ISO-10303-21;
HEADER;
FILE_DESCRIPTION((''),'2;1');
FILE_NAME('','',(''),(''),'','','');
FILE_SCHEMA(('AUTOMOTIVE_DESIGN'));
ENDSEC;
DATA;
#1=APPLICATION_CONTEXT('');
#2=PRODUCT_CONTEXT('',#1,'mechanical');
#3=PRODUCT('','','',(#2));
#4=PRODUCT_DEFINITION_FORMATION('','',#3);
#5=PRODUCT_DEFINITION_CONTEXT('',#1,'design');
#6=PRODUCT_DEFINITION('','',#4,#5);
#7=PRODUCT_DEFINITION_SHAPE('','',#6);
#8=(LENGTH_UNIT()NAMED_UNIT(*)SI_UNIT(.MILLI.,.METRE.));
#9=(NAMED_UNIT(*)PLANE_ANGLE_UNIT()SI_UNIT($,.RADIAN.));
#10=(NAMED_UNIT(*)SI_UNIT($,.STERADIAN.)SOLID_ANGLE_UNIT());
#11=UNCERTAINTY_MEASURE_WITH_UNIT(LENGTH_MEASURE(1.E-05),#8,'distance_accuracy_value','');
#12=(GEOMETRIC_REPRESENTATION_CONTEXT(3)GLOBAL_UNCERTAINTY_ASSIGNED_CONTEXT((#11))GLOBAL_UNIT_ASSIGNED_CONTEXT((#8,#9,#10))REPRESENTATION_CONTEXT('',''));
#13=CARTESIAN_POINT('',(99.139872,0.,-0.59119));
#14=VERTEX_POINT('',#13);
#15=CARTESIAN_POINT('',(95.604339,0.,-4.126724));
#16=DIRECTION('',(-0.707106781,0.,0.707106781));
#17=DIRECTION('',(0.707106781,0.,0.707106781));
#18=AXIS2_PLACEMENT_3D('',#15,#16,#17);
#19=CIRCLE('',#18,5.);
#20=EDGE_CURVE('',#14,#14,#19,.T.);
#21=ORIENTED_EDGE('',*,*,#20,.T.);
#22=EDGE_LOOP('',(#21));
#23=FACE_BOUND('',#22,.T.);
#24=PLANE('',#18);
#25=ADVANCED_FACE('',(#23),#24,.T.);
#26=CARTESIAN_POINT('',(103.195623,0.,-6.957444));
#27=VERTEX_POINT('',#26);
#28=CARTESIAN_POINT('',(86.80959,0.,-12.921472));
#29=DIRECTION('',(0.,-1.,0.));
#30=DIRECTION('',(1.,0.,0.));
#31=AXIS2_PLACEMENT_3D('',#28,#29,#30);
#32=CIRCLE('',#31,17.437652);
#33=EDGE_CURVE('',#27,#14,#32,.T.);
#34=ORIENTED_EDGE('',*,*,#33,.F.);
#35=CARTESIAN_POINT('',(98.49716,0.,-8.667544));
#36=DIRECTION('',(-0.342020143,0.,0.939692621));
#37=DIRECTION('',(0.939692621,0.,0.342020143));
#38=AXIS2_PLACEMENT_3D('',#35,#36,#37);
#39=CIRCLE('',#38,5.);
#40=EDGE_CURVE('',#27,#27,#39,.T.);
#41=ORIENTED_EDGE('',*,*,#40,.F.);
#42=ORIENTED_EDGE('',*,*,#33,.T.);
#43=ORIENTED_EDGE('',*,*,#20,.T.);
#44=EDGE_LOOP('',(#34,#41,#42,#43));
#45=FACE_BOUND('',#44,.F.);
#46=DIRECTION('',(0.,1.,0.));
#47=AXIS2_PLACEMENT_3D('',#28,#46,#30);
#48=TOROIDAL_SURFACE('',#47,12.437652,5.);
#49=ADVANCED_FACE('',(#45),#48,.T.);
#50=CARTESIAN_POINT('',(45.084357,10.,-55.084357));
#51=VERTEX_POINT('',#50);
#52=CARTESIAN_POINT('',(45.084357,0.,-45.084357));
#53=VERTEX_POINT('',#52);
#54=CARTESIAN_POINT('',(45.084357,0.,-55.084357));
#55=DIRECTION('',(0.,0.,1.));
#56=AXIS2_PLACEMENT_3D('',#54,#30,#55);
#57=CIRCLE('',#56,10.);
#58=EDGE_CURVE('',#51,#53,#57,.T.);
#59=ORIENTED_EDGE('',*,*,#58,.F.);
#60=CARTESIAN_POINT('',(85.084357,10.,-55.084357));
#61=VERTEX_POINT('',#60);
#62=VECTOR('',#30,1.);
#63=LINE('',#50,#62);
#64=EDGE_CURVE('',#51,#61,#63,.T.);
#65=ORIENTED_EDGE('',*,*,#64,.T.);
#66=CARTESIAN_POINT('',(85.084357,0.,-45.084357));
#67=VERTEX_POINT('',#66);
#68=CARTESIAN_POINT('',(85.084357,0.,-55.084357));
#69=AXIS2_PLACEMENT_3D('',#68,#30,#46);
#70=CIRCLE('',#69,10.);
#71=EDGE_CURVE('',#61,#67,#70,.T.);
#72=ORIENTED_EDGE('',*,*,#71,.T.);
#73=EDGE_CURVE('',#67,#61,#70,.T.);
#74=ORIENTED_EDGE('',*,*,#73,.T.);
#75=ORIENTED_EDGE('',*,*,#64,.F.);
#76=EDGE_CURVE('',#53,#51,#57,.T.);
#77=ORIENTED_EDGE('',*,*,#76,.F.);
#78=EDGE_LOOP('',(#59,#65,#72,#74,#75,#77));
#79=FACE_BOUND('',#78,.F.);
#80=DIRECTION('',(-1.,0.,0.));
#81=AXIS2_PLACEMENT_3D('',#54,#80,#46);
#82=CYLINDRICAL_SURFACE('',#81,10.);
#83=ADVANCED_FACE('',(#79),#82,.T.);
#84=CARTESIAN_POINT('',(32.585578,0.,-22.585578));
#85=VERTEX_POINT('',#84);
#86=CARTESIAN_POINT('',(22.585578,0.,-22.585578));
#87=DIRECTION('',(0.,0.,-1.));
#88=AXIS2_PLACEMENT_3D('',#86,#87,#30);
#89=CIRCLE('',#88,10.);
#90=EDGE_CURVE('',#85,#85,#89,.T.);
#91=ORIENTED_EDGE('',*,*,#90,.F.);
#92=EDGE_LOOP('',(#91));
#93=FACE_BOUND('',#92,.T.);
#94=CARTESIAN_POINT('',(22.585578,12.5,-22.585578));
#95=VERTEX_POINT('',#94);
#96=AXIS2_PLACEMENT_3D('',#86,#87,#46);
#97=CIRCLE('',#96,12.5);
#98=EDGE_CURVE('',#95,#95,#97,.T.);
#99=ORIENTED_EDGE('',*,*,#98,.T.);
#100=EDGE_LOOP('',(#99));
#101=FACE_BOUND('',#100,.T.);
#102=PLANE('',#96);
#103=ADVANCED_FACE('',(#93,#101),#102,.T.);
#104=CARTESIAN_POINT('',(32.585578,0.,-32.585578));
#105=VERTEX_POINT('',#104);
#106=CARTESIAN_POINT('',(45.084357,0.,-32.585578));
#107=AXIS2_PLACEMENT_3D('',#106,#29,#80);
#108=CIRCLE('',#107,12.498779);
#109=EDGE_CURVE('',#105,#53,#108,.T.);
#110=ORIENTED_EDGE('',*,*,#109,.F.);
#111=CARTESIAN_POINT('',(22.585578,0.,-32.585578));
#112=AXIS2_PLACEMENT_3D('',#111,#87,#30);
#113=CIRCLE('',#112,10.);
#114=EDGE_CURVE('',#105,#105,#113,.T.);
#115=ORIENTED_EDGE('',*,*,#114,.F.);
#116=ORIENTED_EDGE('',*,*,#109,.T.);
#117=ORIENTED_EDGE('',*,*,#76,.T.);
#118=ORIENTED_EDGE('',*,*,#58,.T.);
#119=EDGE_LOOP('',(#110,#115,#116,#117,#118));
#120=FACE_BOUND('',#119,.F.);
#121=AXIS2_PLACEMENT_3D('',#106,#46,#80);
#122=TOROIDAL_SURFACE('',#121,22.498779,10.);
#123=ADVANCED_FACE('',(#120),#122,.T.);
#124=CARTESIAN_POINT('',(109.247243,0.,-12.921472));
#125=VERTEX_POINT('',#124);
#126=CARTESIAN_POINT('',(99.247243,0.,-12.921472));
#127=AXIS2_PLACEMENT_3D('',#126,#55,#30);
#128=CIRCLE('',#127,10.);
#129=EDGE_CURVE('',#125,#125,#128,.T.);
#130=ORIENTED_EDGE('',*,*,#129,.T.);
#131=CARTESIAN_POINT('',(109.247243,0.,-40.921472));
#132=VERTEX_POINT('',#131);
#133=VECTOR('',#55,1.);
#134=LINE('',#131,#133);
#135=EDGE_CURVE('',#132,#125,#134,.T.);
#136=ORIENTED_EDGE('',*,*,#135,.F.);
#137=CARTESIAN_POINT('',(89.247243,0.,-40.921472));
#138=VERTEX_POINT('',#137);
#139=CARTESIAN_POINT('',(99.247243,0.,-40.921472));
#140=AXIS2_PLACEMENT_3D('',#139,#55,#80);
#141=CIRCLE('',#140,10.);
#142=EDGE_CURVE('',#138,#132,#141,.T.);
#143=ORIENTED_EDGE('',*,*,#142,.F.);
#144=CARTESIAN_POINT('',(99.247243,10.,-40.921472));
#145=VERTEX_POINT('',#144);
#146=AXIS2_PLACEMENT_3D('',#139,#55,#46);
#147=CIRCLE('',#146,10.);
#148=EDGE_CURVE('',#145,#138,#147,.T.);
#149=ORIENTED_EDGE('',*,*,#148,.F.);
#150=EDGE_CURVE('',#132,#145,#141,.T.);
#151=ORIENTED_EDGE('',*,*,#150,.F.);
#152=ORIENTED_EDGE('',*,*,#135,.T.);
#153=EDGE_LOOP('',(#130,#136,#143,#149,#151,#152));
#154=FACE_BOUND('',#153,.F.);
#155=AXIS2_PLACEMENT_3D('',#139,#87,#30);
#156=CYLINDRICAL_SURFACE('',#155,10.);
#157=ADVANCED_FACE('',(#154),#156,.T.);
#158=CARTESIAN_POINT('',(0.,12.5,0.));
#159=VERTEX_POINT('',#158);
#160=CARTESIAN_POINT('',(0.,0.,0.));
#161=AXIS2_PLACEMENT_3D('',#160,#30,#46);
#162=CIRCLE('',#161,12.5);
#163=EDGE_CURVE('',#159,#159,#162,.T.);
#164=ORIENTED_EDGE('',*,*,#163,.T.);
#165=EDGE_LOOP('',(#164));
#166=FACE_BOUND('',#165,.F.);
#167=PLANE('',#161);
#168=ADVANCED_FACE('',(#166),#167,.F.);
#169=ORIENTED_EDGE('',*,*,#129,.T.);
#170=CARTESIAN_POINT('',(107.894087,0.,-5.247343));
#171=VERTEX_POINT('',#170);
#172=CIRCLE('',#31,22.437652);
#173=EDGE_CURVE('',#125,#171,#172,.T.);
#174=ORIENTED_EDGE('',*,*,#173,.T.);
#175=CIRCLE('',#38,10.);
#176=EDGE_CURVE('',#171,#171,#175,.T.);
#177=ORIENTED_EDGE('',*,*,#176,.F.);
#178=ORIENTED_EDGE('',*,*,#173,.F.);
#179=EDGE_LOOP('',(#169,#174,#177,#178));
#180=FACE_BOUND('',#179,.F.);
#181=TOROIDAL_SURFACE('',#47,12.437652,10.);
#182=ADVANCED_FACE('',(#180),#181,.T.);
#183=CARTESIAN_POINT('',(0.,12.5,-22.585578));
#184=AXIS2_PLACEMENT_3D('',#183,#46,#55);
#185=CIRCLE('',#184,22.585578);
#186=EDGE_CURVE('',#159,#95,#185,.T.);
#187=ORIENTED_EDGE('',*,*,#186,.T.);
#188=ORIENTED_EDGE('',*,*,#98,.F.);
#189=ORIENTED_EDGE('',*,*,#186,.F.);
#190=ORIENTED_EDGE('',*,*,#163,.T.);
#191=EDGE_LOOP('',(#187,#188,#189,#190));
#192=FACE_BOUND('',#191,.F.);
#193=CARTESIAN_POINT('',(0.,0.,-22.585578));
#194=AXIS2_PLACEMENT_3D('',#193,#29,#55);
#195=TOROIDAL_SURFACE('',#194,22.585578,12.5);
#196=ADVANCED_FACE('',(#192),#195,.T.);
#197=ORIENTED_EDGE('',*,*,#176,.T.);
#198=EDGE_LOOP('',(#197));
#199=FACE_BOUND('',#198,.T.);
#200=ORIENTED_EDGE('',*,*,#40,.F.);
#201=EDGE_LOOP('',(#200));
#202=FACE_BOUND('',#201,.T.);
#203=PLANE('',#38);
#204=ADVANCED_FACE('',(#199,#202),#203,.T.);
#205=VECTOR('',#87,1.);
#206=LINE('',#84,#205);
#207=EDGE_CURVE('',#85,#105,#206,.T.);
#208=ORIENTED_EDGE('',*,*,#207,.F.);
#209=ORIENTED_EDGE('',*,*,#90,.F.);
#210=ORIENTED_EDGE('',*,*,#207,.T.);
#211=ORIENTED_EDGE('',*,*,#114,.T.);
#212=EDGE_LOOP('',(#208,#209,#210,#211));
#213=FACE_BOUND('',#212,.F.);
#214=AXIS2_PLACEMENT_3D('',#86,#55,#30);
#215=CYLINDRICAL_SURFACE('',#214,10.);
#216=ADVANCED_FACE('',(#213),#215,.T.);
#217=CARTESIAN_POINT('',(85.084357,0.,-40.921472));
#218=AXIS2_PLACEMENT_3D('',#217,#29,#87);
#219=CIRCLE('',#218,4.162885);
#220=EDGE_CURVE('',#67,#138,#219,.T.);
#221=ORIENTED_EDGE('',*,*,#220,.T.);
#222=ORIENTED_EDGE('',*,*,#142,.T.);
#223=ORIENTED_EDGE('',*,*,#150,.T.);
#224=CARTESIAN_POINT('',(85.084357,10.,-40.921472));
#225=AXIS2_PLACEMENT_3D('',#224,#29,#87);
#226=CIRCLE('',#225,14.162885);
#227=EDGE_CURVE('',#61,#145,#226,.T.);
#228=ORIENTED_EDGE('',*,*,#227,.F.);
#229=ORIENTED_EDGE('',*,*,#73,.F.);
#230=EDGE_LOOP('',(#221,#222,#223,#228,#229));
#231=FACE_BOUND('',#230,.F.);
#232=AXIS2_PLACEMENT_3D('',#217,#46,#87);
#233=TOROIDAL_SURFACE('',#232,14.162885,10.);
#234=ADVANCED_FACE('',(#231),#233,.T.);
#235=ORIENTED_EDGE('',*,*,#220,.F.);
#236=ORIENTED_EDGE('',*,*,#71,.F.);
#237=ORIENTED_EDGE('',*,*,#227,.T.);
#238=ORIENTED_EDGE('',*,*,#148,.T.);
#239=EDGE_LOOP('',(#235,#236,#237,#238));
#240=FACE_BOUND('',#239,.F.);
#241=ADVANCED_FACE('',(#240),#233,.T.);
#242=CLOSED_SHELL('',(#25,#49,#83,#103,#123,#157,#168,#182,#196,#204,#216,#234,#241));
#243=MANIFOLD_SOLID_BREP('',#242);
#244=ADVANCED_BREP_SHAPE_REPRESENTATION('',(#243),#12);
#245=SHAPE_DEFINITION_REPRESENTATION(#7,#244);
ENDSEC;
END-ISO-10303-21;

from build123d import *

# Parameters (mm, degrees)
F0_R      = 12.5
F2_ANGLE  = 90
F3_R      = 10
F4_DEPTH  = 10
F5_R      = 10
F8_ANGLE  = 90
F9_R      = 10
F10_DEPTH = 40
F12_ANGLE = 90
F13_R     = 10
F14_DEPTH = 28
F15_R     = 10
F15_R_2   = 5
F17_ANGLE = 20
F18_ANGLE = 45


# Not quite as in the source:
# - the program builds the solid bodies; features that only make, move or delete a surface that nothing else refers to are left out


with BuildPart() as f2:
    # F0 (on Right) → F2 (revolve)
    with BuildSketch(Plane.YZ):
        Circle(F0_R)
    revolve(axis=Axis((0, 8.0864932388, -22.5855782628), (0, 1, 0)), revolution_arc=F2_ANGLE)

    # F3 (on face) → F4 (join)
    with BuildSketch(Plane(origin=(0, 0, -22.5855782628), x_dir=(1, 0, 0), z_dir=(0, 0, -1))):
        with Locations((22.5855782628, 0)):
            Circle(F3_R)
    extrude(amount=F4_DEPTH)

    # F5 (on face) → F8 (revolve)
    with BuildSketch(Plane(origin=(0, 0, -32.5855782628), x_dir=(1, 0, 0), z_dir=(0, 0, -1))):
        with Locations((22.5855782628, 0)):
            Circle(F5_R)
    revolve(axis=Axis((45.0843572617, 2.1267626435, -32.5855782628), (0, -1, 0)), revolution_arc=F8_ANGLE)

    # F9 (on face) → F10 (join)
    with BuildSketch(Plane.YZ.offset(45.0843572617)):
        with Locations((0, -55.0843572617)):
            Circle(F9_R)
    extrude(amount=F10_DEPTH)

    # F11 (on face) → F12 (revolve)
    with BuildSketch(Plane.YZ.offset(85.0843572617)):
        with BuildLine():
            ThreePointArc((0, -45.0843572617), (-7.0710678119, -62.1554250735), (10, -55.0843572617))
            ThreePointArc((10, -55.0843572617), (7.0710678119, -48.0132894498), (0, -45.0843572617))
        make_face()
    revolve(axis=Axis((85.0843572617, 1.324259676, -40.921472013), (0, -1, 0)), revolution_arc=F12_ANGLE)

    # F13 (on face) → F14 (join)
    with BuildSketch(Plane.XY.offset(-40.921472013)):
        with Locations((99.2472425103, 0)):
            Circle(F13_R)
    extrude(amount=F14_DEPTH)

    # F15 (on face) → F17 (revolve)
    with BuildSketch(Plane.XY.offset(-12.921472013)):
        with Locations((99.2472425103, 0)):
            Circle(F15_R)
        with Locations((99.2472425103, 0)):
            Circle(F15_R_2, mode=Mode.SUBTRACT)
    revolve(axis=Axis((86.8095904589, -1.1897617951, -12.921472013), (0, -1, 0)), revolution_arc=F17_ANGLE)

    # F16 (on face) → F18 (revolve)
    with BuildSketch(Plane.XY.offset(-12.921472013)):
        with BuildLine():
            ThreePointArc((94.2472425103, 0), (99.2472425103, -5), (104.2472425103, 0))
            ThreePointArc((104.2472425103, 0), (99.2472425103, 5), (94.2472425103, 0))
        make_face()
    revolve(axis=Axis((86.8095904589, -1.1897617951, -12.921472013), (0, -1, 0)), revolution_arc=F18_ANGLE)


solid = f2.part
